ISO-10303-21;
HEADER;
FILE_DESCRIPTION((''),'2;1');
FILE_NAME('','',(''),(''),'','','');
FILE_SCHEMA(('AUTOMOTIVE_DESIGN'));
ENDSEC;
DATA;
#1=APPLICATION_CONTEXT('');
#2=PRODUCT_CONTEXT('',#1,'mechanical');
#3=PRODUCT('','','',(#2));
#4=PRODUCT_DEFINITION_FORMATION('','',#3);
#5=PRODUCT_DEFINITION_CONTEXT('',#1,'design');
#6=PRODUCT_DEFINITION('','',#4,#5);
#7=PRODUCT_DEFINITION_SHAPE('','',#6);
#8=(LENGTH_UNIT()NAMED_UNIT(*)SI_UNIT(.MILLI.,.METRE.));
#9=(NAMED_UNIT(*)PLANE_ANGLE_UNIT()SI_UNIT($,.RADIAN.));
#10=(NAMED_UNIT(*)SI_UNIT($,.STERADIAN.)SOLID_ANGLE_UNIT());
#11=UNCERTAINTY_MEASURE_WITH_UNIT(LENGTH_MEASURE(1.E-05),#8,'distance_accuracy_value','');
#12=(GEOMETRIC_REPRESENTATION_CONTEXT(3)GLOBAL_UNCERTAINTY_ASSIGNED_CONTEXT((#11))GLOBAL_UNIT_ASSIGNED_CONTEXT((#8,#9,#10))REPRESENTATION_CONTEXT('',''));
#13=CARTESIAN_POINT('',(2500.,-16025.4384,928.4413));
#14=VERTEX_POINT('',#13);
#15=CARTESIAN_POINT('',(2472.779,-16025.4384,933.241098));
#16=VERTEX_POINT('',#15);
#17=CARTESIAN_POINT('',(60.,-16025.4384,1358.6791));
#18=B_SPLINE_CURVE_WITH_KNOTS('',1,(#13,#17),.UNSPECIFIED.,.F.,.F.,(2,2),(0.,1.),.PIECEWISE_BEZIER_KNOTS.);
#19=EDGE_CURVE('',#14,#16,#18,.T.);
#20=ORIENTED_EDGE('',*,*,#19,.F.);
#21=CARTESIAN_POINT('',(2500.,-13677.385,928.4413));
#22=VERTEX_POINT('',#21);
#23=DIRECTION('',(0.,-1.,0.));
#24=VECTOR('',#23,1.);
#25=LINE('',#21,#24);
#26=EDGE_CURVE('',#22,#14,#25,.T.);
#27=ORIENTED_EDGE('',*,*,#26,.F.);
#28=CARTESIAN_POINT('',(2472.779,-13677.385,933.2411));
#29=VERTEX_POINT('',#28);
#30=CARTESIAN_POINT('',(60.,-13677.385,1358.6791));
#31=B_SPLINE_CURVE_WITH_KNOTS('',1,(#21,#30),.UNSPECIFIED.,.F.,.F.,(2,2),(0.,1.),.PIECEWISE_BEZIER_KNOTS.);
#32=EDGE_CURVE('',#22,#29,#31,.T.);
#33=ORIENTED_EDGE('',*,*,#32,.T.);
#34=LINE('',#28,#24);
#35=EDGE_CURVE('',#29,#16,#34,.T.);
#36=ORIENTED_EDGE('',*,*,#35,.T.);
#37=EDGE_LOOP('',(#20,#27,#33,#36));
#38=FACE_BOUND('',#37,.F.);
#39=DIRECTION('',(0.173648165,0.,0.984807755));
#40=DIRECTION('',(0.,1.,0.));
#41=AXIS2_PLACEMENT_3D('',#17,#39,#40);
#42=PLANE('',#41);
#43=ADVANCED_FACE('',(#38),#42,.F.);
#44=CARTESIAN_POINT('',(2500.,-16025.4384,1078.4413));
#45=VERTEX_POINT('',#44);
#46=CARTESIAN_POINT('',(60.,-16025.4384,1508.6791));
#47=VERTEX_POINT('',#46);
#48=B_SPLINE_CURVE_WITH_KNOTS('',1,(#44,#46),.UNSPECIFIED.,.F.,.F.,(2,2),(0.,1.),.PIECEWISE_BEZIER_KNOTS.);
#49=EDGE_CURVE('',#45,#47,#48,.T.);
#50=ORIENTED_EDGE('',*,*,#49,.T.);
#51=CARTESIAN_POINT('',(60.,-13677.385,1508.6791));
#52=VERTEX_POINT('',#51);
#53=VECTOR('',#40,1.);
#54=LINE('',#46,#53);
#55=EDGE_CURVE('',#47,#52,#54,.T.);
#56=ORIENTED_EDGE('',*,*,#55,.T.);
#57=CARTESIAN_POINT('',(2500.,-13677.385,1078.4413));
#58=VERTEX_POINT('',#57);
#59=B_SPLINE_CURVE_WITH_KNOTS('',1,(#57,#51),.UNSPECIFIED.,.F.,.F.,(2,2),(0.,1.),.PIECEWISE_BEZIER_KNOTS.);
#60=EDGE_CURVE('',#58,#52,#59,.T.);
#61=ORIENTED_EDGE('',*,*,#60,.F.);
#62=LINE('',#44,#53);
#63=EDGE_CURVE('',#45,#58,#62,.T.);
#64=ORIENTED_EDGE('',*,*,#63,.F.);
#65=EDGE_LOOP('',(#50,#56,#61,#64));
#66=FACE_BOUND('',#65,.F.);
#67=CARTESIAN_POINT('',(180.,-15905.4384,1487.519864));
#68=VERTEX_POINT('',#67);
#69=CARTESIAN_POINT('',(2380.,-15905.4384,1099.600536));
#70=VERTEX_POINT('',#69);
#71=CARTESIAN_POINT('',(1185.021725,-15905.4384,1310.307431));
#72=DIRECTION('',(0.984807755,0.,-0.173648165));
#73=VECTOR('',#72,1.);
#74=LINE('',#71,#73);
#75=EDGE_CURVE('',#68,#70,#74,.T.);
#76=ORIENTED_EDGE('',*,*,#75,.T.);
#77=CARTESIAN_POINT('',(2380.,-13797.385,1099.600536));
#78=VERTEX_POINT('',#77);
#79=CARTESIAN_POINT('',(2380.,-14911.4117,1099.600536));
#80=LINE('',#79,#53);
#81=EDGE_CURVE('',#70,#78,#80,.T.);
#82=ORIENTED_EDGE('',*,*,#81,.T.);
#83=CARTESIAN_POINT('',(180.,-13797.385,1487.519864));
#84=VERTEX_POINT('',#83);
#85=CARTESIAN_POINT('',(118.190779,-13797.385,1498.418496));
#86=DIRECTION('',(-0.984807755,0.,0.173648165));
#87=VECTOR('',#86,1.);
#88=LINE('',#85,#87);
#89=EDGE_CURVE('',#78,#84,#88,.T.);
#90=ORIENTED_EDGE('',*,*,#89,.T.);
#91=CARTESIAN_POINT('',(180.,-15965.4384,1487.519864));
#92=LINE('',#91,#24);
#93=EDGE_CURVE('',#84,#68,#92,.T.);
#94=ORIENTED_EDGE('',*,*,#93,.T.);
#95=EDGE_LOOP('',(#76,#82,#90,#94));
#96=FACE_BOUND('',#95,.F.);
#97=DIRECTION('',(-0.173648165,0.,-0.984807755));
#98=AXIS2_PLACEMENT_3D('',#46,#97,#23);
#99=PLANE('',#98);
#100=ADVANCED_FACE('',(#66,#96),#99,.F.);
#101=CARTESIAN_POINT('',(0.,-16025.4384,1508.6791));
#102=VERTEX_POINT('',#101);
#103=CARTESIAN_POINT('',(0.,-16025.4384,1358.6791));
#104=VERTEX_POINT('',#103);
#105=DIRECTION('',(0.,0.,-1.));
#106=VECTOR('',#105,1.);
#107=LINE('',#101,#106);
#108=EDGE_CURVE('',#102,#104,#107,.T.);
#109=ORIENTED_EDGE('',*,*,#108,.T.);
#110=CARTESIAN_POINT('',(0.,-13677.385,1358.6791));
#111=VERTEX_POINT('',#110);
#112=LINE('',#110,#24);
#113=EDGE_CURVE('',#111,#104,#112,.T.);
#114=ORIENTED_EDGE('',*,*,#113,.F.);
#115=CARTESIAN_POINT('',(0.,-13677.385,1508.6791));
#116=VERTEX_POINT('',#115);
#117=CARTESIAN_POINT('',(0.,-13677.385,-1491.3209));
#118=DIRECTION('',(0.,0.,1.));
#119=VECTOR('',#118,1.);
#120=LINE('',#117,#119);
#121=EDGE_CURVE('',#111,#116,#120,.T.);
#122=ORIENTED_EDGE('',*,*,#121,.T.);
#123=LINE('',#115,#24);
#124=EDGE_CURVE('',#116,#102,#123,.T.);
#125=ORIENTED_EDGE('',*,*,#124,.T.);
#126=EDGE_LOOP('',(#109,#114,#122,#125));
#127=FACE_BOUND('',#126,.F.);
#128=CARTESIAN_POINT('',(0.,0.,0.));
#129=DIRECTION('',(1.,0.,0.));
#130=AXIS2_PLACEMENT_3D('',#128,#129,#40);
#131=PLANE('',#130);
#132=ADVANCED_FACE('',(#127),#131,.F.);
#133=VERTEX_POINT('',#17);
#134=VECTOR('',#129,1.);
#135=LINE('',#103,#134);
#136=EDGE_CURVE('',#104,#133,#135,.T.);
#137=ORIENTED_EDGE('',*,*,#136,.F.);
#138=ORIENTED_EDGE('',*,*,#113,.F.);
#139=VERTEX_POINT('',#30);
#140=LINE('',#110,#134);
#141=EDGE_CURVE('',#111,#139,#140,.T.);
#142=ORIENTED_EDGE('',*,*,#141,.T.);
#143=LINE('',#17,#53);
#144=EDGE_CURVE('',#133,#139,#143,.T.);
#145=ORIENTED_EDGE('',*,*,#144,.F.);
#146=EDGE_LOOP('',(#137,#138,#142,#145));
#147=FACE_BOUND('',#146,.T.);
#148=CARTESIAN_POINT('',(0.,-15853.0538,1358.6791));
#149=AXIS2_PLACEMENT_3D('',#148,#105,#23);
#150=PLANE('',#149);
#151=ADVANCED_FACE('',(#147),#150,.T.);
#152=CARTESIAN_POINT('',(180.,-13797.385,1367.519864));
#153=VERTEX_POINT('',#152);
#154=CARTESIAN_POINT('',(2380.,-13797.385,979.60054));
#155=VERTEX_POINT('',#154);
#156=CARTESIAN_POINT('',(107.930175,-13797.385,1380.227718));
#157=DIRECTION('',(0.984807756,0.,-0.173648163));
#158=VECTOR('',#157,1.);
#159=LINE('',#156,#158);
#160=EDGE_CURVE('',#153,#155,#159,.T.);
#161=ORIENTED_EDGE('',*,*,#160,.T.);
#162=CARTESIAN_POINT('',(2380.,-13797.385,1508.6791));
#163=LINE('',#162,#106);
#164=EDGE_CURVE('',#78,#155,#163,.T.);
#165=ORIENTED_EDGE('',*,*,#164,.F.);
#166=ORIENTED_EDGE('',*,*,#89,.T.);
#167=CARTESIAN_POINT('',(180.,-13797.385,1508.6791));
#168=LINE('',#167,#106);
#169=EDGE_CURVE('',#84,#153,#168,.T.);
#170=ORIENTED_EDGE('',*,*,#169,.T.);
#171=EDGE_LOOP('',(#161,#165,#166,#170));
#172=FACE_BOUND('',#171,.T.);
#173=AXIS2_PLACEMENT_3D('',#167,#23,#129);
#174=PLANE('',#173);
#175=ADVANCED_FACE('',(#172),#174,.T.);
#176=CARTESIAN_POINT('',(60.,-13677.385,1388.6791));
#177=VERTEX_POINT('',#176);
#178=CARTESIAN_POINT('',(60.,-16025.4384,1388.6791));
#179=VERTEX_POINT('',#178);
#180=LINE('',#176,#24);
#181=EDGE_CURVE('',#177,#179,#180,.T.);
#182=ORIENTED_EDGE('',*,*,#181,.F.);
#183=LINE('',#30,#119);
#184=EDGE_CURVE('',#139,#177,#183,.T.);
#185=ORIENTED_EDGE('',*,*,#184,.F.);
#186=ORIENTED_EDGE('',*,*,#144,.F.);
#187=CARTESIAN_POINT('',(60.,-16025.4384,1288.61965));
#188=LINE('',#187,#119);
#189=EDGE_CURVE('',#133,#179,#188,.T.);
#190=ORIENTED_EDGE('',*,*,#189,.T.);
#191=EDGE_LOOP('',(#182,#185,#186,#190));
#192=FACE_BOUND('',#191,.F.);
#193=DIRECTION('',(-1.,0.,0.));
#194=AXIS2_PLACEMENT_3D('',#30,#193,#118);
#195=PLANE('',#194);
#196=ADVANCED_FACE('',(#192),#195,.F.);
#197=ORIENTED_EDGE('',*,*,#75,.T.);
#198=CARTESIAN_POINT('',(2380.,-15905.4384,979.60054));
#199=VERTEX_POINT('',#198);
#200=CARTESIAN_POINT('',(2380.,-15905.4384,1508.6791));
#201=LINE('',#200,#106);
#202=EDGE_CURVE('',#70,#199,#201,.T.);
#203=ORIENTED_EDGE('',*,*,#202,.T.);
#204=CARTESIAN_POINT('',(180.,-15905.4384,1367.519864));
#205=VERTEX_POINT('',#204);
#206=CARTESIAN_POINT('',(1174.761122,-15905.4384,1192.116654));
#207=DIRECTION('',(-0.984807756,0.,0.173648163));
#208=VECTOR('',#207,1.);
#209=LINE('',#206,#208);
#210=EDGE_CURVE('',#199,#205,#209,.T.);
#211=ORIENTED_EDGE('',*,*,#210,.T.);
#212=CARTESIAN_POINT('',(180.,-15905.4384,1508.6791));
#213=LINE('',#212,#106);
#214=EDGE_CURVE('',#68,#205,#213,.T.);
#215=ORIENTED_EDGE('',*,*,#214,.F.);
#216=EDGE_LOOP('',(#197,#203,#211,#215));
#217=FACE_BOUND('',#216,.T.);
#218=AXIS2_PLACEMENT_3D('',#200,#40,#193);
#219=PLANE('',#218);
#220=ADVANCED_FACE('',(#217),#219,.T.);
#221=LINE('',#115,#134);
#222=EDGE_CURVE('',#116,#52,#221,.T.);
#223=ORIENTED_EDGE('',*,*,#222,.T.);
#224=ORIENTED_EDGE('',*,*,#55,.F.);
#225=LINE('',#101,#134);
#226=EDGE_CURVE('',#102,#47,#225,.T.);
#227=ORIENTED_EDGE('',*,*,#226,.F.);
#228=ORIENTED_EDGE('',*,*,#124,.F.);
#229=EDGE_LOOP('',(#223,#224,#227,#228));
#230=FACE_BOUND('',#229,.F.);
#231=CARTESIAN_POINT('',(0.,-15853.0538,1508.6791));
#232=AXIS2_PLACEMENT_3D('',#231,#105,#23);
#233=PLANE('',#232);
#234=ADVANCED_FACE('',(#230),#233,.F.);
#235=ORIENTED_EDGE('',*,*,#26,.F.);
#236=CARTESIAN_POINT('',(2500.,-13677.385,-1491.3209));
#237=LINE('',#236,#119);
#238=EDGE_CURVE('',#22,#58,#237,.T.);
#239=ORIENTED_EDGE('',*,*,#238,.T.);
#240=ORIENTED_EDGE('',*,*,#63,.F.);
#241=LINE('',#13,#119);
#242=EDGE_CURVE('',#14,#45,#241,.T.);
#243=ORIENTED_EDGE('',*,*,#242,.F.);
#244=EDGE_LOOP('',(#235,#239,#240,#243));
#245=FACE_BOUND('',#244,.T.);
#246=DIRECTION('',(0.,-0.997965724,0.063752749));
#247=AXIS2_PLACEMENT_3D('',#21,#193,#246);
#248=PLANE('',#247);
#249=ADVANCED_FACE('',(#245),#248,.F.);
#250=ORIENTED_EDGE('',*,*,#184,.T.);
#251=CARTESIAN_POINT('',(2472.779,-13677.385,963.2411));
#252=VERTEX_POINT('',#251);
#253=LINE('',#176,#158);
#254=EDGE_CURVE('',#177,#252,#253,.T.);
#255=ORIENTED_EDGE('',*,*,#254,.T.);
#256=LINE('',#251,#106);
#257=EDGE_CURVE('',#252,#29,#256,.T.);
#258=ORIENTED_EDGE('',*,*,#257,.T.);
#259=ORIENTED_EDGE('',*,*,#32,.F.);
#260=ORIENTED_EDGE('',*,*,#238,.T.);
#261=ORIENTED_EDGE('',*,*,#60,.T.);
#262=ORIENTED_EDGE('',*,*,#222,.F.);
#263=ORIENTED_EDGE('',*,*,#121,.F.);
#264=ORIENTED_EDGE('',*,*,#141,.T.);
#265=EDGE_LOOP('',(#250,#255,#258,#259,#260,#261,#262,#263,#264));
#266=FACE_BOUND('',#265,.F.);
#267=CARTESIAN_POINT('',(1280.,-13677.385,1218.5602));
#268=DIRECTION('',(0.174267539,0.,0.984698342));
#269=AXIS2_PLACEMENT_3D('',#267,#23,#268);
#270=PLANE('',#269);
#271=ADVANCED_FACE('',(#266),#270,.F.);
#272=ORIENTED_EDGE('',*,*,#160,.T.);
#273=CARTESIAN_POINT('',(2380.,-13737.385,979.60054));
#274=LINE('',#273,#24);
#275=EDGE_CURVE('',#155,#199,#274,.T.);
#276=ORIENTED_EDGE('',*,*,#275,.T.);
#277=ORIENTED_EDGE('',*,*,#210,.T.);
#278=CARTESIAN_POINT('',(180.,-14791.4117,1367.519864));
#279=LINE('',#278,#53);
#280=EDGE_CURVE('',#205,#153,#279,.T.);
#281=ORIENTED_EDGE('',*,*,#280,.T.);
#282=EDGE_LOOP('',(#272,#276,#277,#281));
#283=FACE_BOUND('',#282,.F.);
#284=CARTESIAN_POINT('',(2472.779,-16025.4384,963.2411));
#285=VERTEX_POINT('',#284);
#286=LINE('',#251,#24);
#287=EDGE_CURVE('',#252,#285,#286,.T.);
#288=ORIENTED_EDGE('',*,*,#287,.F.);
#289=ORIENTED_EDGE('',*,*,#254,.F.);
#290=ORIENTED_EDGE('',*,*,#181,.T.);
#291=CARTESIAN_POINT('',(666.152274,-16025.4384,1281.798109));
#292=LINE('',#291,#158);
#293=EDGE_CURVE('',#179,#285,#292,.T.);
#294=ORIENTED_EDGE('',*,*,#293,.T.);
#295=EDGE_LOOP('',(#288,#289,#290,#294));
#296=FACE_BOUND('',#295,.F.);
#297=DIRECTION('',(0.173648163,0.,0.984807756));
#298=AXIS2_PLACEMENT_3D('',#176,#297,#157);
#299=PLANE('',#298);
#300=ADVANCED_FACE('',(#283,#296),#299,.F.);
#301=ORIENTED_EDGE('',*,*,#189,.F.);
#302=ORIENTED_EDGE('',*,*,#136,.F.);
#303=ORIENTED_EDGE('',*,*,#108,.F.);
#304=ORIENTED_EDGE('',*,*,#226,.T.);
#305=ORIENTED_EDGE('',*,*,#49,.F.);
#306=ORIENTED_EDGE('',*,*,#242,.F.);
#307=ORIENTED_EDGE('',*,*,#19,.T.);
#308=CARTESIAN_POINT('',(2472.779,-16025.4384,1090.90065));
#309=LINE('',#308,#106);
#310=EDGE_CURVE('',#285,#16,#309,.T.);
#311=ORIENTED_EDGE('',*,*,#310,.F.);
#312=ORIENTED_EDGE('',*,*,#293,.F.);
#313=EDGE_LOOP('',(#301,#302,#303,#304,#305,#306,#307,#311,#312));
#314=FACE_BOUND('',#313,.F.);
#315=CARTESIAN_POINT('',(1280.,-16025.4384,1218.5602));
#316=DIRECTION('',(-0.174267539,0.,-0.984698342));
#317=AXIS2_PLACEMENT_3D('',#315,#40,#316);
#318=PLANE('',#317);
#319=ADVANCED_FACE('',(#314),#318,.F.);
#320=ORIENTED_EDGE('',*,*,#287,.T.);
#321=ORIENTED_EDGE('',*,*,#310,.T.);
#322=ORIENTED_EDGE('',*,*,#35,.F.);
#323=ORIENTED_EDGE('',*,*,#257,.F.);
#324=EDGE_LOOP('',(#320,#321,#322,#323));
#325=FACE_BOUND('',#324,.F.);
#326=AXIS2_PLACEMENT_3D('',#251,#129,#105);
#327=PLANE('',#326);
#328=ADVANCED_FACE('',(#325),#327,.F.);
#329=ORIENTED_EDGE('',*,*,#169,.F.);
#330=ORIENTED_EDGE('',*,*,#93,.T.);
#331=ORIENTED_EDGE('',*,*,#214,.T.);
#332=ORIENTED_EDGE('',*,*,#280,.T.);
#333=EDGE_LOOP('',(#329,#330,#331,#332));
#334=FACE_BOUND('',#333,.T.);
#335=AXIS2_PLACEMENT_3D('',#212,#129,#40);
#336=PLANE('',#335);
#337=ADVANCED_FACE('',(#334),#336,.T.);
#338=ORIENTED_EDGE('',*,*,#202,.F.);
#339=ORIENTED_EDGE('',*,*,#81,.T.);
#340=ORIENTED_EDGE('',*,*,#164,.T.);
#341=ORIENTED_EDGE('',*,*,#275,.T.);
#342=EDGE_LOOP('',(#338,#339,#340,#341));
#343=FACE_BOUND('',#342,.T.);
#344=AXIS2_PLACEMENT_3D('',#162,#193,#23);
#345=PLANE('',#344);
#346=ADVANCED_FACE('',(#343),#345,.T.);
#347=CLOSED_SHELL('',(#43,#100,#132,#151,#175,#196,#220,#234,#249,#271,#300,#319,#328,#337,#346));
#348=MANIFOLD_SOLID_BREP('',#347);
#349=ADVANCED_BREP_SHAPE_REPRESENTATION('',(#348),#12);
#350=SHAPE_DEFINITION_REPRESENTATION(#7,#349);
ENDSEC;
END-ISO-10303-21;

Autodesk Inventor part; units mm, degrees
sketch "Sketch1" plane through (0, 0, 0) normal (1, 0, 0) x (0, 1, 0)
  line L0 (-16025.4384, 1509.0974) -> (-16025.4384, 1358.9468)
  line L1 (-15853.0538, 1508.6791) -> (-16025.4384, 1508.6791)
  line L2 (-13852.385, -1490.9026) -> (-13852.385, 1509.0974)
  line L3 (-13502.385, 1508.6791) -> (-13502.385, 1509.0974)
  line L4 (-13852.385, 1509.0974) -> (-13677.385, 1509.0974)
  line L5 (-15853.0538, -1491.3209) -> (-15853.0538, 1508.6791)
  line L6 (-16025.4384, 1358.9468) -> (-16025.4384, -1491.3209)
  line L7 (-16025.4384, -1491.3209) -> (-13677.385, -1491.3209)
  line L8 (-13677.385, -1491.3209) -> (-13677.385, 1509.0974)
  line L9 (-13677.385, 1508.6791) -> (-16025.4384, 1508.6791)
  line L10 (-16025.4384, 1508.6791) -> (-16025.4384, 1358.6791)
  line L11 (-16025.4384, 1508.6791) -> (-13677.385, 1508.6791)
  line L12 (-13677.385, 1508.6791) -> (-13677.385, 1358.6791)
  line L13 (-13677.385, 1358.6791) -> (-16025.4384, 1358.6791)
  line L14 (-16025.4384, 1358.6791) -> (-16025.4384, 1508.6791)
  point P0 (0, 0)
  dimension "d2" = 150
ref_plane "Work Plane2" through (2500, 0, 0) normal (1, 0, 0) x (0, 1, 0)
ref_plane "Work Plane1" through (0, 0, 0) normal (1, 0, 0) x (0, 1, 0)
extrude "Extrusion1" add sketch "Sketch1" along normal blind 60 contours L1 L5 L13 L6 L0 | L9 L2 L13 L5 | L9 L8 L13 L2
ref_plane "Work Plane3" through (60, 0, 0) normal (1, 0, 0) x (0, 0, -1)
sketch "Sketch3" plane through (60, 0, 0) normal (1, 0, 0) x (0, 0, -1)
  line L0 (-1358.6791, -13677.385) -> (-1508.6791, -13677.385) projected
  line L1 (-1508.6791, -13677.385) -> (-1508.6791, -16025.4384) projected
  line L2 (-1508.6791, -16025.4384) -> (-1358.6791, -16025.4384) projected
  line L3 (-1358.6791, -16025.4384) -> (-1358.6791, -13677.385) projected
  point P0 (0, 0)
sketch "Sketch5" plane through (2500, 0, 0) normal (1, 0, 0) x (0, 1, 0)
  line L0 (-16025.4384, 1358.9468) -> (-16025.4384, -1491.3209) projected
  point P0 (0, 0)
ref_plane "Work Plane4" through (60, -16025.4384, 1508.6791) normal (0, -1, 0) x (0, 0, -1)
sketch "Sketch6" plane through (60, -16025.4384, 1508.6791) normal (0, -1, 0) x (0, 0, -1)
  line L0 (0, 0) -> (150, 0) projected
  line L1 (149.7323, 2440) -> (3000, 2440) projected
  line L2 (0, 0) -> (430.2378, 2440)
  line L3 (0, 0) -> (2477.6409, 0) construction
  line L4 (150, 0) -> (580.2378, 2440)
  line L5 (150, 0) -> (2627.6409, 0) construction
  line L6 (580.2378, 2440) -> (430.2378, 2440)
  point P0 (1508.6791, -60)
  dimension "d6" = 80
  dimension "d7" = 80
sketch "Sketch9" plane through (2500, 0, 0) normal (1, 0, 0) x (0, 1, 0)
  line L0 (-13677.385, -1491.3209) -> (-13677.385, 1509.0974) projected
  line L1 (-16025.4384, 1078.4413) -> (-13677.385, 1078.4413)
  line L2 (-13677.385, 1078.4413) -> (-13677.385, 928.4413)
  line L3 (-13677.385, 928.4413) -> (-16025.4384, 928.4413)
  line L4 (-16025.4384, 928.4413) -> (-16025.4384, 1078.4413)
  point P0 (0, 0)
  point P1 (-16025.4384, 928.4413)
loft "Loft2" add profiles "Sketch9" section 2 edges at (60, -13677.385, 1433.6791) (60, -15939.2461, 1508.6791) (60, -16025.4384, 1433.813) (60, -14851.4117, 1358.6791)
sketch "Sketch10" plane through (0, -13677.385, 1508.6791) normal (0, 1, 0) x (1, 0, 0)
  line L0 (60, 150) -> (60, 120)
  line L1 (60, 120) -> (2472.779, 545.438)
  line L2 (60, 120) -> (2510, 120) construction
  line L3 (0, 150) -> (60, 150) projected
  line L4 (60, 150) -> (2472.779, 575.438)
  line L5 (2472.779, 545.438) -> (2472.779, 575.438)
  point P0 (0, 1508.6791)
  dimension "d16" = 30
  dimension "d17" = 2450
  dimension "d18" = 10
  dimension "d19" = 2450
extrude "Extrusion2" cut sketch "Sketch10" against normal through all
sketch "Sketch11" plane through (0, -16025.4384, 1508.6791) normal (0, 0, 1) x (1, 0, 0)
  line L0 (2500, 0) -> (2500, 2348.0534) projected
  line L1 (2500, 2348.0534) -> (60, 2348.0534) projected
  line L2 (60, 2348.0534) -> (60, 0) projected
  line L3 (2500, 0) -> (60, 0) projected
  line L4 (2500, 0) -> (60, 0) projected
  line L5 (2500, 0) -> (2380, 0)
  line L6 (2380, 0) -> (2380, 120)
  line L7 (2380, 120) -> (2500, 120)
  line L8 (2500, 120) -> (2500, 0)
  line L9 (60, 2348.0534) -> (180, 2348.0534)
  line L10 (180, 2348.0534) -> (180, 2228.0534)
  line L11 (180, 2228.0534) -> (60, 2228.0534)
  line L12 (60, 2228.0534) -> (60, 2348.0534)
  line L13 (2380, 120) -> (180, 120)
  line L14 (180, 120) -> (180, 2228.0534)
  line L15 (180, 2228.0534) -> (2380, 2228.0534)
  line L16 (2380, 2228.0534) -> (2380, 120)
  point P0 (0, 16025.4384)
  dimension "d22" = 120
  dimension "d23" = 120
  dimension "d24" = 120
  dimension "d25" = 120
extrude "Extrusion3" cut sketch "Sketch11" against normal through all contours L13 L14 L15 L16
properties part number "eave_frame_side_" material "Wood (Maple)"
